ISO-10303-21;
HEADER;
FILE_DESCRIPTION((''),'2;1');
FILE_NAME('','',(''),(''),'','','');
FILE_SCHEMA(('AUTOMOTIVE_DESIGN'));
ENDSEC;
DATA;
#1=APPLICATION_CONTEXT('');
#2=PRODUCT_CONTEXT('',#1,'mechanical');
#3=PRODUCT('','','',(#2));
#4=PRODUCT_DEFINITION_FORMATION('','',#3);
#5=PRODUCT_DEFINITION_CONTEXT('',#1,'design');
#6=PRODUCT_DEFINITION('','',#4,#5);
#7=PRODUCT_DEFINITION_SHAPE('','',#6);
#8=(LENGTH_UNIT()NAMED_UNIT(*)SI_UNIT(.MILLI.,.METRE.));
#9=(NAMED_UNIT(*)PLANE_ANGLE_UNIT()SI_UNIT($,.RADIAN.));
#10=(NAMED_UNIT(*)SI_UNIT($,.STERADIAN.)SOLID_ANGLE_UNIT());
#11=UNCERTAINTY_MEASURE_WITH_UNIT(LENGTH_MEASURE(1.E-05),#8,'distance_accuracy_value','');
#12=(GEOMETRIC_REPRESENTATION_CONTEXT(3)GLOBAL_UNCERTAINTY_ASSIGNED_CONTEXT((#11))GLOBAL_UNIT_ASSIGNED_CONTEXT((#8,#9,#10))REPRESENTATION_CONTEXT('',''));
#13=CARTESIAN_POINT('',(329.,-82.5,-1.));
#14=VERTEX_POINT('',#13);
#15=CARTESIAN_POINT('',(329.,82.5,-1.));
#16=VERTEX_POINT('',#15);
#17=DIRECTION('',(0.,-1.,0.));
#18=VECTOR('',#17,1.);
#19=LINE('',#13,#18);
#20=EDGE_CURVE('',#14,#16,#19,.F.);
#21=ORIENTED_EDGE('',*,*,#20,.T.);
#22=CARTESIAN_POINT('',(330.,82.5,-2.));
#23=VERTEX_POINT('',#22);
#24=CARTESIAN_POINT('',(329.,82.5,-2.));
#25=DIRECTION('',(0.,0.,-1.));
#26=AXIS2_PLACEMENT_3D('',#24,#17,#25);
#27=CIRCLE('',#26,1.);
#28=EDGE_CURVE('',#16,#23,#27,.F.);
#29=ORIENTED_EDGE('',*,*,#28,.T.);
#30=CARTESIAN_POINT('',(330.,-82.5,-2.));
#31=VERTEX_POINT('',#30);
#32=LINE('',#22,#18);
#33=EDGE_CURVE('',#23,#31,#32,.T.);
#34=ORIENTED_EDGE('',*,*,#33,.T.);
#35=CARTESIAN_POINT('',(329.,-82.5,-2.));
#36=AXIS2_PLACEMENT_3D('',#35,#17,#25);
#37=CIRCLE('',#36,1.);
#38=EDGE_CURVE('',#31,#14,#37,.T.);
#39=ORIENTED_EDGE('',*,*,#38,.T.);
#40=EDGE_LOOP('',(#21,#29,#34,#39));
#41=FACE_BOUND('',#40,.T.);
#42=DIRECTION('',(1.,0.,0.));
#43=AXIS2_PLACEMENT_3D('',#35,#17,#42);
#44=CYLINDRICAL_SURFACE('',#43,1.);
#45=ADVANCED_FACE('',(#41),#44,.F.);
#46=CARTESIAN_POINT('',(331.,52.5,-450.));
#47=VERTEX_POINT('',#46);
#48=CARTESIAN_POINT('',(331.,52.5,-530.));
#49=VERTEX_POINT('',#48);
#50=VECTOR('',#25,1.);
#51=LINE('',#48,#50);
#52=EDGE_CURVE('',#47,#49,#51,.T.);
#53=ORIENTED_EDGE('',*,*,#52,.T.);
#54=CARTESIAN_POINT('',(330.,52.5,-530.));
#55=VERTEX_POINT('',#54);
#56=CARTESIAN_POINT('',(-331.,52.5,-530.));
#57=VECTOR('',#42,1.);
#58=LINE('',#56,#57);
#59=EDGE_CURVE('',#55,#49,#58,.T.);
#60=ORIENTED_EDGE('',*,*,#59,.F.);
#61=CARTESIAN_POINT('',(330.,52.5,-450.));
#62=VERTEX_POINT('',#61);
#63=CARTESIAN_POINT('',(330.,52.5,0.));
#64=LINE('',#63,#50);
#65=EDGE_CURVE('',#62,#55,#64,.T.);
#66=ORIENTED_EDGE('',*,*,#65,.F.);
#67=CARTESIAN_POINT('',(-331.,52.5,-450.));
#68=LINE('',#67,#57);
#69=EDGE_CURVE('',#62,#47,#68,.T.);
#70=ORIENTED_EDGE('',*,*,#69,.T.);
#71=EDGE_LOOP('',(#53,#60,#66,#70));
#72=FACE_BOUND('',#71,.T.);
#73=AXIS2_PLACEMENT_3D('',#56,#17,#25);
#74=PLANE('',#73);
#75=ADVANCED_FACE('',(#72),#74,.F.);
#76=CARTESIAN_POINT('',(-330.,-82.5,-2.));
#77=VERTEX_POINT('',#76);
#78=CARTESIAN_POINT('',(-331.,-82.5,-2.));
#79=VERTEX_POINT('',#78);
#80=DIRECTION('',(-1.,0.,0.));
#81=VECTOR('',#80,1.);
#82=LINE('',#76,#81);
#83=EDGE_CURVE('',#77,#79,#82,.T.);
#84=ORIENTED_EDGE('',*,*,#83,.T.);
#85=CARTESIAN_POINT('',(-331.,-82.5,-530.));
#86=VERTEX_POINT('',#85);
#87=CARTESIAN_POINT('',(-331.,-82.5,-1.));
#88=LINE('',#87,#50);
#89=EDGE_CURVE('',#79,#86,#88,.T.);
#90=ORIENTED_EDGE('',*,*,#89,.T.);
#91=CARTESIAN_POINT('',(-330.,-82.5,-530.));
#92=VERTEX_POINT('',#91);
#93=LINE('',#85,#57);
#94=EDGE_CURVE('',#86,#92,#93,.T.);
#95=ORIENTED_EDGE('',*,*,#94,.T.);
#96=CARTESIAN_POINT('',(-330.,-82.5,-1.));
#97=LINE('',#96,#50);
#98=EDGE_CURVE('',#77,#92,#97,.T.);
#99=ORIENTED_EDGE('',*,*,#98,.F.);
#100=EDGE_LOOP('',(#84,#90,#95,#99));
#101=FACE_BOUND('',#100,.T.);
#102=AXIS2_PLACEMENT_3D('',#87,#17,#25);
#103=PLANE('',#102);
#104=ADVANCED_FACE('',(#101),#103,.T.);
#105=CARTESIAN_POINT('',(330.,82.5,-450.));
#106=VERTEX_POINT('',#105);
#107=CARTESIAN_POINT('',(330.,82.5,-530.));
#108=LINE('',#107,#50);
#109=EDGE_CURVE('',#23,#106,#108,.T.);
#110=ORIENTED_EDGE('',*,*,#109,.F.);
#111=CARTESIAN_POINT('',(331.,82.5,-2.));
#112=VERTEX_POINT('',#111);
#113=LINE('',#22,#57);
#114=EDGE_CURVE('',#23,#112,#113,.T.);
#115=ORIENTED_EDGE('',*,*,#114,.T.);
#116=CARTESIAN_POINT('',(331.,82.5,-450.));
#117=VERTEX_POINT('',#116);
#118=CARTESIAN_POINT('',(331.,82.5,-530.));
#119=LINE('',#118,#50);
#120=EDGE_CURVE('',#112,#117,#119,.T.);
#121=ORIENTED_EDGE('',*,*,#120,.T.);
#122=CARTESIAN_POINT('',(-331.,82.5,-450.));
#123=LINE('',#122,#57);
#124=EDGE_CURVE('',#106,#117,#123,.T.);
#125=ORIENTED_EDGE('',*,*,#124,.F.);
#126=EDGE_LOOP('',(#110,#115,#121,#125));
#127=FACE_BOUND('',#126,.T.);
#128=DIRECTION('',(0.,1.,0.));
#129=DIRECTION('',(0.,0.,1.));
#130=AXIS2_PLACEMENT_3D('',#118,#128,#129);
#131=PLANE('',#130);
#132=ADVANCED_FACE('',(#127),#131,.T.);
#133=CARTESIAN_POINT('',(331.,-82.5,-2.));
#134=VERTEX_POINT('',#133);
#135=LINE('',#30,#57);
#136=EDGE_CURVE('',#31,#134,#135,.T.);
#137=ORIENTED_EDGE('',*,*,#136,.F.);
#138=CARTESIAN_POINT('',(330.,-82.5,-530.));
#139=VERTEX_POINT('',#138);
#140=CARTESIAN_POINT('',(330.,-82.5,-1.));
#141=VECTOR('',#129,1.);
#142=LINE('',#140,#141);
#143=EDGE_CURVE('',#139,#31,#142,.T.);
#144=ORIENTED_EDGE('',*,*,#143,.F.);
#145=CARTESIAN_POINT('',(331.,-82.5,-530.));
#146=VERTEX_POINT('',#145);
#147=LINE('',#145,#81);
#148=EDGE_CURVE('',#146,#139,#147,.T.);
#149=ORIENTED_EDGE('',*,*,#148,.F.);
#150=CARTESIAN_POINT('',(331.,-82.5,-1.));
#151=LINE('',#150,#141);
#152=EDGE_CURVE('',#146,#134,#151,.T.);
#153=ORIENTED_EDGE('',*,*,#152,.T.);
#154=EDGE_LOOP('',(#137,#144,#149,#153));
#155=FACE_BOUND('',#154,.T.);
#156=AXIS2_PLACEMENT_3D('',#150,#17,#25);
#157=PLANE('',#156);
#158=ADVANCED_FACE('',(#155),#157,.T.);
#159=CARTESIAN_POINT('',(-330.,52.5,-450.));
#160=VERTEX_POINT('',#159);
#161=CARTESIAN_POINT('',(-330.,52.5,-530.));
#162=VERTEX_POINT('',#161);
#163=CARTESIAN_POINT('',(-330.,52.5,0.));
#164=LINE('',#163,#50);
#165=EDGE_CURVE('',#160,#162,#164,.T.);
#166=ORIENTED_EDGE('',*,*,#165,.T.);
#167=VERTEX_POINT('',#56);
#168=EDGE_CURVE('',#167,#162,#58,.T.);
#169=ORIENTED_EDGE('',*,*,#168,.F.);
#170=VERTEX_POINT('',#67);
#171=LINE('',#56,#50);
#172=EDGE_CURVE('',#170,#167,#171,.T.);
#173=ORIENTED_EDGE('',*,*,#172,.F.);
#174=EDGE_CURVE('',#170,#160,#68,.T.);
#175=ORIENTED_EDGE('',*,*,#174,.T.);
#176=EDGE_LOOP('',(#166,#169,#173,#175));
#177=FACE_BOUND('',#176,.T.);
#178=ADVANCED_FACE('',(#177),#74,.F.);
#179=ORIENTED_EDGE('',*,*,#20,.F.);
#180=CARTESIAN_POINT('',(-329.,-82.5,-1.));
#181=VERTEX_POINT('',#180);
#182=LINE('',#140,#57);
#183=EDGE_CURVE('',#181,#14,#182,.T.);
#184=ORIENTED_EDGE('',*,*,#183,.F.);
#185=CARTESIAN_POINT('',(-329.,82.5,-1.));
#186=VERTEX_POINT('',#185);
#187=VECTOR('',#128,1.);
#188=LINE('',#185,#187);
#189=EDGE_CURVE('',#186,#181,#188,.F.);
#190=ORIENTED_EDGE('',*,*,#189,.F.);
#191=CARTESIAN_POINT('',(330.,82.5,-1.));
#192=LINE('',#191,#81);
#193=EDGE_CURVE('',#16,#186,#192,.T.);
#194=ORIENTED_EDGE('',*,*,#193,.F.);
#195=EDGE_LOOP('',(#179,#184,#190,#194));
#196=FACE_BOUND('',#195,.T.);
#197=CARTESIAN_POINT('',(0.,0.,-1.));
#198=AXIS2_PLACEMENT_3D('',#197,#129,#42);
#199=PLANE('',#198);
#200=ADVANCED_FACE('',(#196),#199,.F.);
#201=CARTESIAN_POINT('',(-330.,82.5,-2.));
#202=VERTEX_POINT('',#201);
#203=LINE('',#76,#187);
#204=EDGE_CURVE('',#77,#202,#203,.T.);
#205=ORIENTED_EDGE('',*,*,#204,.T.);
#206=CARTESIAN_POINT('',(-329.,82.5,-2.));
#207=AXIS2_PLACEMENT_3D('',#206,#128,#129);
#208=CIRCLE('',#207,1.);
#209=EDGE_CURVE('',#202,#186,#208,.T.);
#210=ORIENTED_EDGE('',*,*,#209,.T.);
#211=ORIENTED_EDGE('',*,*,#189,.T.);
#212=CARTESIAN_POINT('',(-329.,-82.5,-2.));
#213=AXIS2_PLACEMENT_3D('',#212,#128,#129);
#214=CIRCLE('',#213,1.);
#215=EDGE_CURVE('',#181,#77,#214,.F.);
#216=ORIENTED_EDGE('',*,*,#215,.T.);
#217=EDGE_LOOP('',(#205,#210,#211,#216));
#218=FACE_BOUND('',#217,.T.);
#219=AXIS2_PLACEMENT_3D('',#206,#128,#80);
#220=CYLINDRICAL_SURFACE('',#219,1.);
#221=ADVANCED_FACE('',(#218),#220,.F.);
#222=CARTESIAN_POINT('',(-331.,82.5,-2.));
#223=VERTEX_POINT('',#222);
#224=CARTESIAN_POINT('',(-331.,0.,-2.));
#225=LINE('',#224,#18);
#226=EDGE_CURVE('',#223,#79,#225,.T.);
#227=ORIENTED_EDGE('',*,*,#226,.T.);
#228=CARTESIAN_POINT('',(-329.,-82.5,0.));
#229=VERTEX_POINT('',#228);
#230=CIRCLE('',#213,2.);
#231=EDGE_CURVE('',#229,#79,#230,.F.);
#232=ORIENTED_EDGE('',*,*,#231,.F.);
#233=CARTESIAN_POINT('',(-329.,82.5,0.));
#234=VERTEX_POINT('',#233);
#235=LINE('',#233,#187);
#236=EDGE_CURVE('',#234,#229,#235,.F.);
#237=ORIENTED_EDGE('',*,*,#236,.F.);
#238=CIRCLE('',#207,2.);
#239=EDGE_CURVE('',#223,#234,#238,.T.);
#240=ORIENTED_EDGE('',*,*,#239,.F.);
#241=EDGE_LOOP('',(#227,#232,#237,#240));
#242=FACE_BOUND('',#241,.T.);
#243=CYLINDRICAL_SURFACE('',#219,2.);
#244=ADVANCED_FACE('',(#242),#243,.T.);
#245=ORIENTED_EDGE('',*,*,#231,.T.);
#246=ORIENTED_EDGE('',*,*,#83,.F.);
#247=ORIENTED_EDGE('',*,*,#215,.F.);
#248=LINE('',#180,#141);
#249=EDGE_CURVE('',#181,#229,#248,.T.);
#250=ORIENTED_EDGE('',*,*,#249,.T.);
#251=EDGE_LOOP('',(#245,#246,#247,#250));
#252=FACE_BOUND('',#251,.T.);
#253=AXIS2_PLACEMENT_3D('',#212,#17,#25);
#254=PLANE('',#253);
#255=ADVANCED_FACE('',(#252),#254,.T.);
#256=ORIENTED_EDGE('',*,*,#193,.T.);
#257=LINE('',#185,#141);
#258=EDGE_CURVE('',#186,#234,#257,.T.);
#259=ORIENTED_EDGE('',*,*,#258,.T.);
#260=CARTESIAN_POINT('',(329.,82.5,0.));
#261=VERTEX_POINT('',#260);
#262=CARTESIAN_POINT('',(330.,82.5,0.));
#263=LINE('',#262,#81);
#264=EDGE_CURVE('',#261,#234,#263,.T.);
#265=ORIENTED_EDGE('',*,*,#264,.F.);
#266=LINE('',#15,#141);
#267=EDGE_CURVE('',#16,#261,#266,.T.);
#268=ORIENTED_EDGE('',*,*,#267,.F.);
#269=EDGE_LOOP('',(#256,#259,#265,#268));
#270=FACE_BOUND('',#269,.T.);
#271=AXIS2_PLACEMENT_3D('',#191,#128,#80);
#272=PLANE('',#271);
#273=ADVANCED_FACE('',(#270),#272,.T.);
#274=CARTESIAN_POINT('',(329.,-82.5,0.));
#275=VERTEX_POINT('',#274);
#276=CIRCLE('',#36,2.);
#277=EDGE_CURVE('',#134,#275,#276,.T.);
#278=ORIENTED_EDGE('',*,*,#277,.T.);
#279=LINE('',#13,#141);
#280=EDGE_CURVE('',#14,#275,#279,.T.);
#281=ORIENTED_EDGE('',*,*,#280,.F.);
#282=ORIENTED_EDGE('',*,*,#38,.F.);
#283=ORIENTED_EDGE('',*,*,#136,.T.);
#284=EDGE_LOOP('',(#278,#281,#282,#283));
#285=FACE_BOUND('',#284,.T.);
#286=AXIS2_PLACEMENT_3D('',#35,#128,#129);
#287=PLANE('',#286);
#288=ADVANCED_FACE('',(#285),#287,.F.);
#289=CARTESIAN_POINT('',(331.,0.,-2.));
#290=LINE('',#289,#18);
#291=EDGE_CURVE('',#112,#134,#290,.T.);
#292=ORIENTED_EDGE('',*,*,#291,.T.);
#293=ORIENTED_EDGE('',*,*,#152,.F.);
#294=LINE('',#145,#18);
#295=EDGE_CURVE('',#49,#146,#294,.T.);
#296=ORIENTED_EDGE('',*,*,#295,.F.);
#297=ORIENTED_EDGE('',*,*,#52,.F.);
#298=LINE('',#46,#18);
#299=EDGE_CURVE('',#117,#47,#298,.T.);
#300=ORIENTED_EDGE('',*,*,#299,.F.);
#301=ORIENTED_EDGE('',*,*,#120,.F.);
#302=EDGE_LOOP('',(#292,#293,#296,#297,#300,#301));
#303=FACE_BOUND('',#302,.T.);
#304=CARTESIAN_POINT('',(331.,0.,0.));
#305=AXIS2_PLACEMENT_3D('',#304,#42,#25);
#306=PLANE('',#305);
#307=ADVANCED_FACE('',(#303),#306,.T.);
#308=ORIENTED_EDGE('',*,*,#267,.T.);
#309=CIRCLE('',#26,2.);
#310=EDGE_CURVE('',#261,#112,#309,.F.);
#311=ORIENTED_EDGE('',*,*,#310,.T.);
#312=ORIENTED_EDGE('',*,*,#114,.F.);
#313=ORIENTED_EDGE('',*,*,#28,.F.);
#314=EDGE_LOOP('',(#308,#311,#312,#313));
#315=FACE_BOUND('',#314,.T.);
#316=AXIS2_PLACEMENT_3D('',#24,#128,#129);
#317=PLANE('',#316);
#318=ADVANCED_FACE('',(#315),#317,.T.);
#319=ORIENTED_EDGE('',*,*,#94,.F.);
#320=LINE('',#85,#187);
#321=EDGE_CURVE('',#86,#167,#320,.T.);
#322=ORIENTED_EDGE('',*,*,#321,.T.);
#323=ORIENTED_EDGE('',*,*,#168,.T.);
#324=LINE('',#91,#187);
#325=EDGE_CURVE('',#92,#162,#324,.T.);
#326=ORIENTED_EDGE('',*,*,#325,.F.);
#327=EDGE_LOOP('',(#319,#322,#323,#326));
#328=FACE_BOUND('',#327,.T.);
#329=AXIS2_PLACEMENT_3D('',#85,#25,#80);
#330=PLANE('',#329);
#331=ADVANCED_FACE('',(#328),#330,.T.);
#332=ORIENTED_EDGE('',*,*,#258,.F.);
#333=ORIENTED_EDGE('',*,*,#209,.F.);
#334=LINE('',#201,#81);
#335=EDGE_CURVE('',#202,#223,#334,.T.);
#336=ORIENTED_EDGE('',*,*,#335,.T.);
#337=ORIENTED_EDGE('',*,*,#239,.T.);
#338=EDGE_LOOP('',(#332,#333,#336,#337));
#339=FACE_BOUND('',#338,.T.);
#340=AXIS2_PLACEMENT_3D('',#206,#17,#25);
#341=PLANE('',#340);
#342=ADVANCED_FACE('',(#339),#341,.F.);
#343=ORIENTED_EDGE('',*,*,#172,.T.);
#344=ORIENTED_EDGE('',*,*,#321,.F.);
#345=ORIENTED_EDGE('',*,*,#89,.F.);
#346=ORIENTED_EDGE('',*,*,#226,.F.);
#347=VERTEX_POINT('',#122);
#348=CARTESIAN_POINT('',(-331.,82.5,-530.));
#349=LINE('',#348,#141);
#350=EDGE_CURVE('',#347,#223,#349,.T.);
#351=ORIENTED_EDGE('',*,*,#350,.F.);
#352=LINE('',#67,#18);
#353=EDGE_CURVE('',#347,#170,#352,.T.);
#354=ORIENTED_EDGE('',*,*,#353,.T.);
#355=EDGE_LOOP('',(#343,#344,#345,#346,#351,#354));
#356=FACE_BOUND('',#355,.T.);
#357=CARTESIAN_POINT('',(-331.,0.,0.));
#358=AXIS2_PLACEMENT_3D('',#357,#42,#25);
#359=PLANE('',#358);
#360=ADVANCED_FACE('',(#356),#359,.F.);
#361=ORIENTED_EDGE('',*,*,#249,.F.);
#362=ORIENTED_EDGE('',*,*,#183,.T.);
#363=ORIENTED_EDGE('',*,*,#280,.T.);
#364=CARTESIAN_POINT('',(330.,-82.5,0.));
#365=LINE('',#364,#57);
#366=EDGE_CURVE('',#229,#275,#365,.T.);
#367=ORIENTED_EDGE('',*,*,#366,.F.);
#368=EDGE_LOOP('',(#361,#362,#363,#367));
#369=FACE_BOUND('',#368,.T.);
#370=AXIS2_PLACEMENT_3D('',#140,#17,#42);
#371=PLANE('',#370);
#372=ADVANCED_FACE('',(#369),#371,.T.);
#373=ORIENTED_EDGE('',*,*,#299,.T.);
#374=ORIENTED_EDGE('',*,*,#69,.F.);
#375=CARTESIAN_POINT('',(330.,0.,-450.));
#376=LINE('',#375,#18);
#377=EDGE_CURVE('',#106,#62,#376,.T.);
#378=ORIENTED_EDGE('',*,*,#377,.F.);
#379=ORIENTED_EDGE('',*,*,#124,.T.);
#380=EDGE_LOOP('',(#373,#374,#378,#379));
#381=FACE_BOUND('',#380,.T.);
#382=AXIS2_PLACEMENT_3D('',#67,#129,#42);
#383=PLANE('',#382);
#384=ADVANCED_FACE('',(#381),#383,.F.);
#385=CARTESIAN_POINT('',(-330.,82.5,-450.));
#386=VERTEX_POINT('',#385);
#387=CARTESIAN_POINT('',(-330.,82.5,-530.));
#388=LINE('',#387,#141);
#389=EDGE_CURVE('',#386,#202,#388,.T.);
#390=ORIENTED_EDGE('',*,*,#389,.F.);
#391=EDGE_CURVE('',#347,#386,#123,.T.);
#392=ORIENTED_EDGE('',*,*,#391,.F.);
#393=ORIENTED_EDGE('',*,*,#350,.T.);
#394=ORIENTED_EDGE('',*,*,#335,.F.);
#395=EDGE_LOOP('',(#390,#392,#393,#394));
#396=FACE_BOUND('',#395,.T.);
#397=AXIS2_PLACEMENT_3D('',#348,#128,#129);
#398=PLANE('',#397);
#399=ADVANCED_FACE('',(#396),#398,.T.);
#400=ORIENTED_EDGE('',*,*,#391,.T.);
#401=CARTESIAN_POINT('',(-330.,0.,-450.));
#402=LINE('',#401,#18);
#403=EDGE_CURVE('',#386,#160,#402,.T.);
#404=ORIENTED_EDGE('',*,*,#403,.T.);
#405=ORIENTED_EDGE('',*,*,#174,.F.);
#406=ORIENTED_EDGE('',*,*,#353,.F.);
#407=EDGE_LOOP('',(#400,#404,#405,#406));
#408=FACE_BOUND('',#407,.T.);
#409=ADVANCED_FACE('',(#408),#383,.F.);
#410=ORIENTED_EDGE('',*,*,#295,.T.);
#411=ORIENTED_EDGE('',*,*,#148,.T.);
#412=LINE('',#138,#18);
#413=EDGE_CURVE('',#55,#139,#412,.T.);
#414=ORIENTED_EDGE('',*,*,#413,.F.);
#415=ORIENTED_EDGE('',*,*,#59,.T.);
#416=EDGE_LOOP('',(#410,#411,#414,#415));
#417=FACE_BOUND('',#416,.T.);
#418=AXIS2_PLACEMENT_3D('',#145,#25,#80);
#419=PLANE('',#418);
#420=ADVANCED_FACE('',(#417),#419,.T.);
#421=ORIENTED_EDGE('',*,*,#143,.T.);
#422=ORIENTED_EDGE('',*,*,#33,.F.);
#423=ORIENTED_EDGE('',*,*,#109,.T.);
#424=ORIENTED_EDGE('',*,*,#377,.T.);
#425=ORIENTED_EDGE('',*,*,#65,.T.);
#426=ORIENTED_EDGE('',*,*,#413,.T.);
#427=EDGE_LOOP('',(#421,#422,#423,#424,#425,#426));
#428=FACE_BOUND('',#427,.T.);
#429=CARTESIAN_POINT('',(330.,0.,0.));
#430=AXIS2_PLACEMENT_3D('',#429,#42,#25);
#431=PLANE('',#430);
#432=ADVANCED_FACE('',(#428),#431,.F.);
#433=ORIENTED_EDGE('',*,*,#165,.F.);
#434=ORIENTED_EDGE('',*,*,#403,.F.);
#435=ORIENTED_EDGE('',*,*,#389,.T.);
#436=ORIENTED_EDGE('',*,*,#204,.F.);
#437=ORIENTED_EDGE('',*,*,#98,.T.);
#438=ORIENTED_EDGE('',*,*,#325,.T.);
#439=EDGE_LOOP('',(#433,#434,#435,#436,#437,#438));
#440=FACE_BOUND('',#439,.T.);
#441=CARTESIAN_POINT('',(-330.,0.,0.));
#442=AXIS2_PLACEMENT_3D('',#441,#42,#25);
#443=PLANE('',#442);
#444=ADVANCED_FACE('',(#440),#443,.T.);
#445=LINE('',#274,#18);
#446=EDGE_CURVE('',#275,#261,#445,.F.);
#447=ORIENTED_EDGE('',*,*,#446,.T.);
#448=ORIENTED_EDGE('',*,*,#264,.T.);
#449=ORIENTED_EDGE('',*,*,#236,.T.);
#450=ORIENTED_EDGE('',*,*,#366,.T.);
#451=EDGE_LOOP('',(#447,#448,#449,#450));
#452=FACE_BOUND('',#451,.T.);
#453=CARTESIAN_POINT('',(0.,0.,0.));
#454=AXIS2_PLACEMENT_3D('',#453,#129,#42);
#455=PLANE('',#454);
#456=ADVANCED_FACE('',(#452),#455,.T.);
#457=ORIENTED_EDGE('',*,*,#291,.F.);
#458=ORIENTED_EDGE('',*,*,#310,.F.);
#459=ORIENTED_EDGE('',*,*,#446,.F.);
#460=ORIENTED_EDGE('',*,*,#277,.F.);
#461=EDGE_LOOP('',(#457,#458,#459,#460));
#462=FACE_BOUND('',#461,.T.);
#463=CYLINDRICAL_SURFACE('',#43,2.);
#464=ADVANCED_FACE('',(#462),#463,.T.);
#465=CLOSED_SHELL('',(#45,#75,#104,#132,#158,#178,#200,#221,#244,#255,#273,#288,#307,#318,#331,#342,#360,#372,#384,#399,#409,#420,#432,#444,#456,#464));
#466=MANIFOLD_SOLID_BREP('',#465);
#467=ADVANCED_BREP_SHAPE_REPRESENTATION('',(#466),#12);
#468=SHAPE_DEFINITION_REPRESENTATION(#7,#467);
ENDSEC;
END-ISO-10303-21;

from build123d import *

# Parameters (mm, degrees)
SKETCH1_W                      = 660
SKETCH1_H                      = 165
BASE_FLANGE1_DEPTH             = 1
EDGE_FLANGE1_STRIP_W           = 6
EDGE_FLANGE1_STRIP_H           = 1
EDGE_FLANGE1_STRIP_CUT_DEPTH   = 165
EDGE_FLANGE1_STRIP_2_W         = 6
EDGE_FLANGE1_STRIP_2_H         = 1
EDGE_FLANGE1_STRIP_CUT_2_DEPTH = 165
EDGE_FLANGE1_DEPTH             = 165
EDGE_FLANGE1_BEND_DEPTH        = 165
SKETCH12_W                     = 80
SKETCH12_H                     = 30
CUT_EXTRUDE1_DEPTH             = 853.027141586


# Sheet-metal steps are written as plain solids
with BuildPart() as part:
    # Sketch1 → Base-Flange1 (new body)
    with BuildSketch(Plane.XY):
        Rectangle(SKETCH1_W, SKETCH1_H)
    extrude(amount=-BASE_FLANGE1_DEPTH)

    # Edge-Flange1 strip (across the edge) → Edge-Flange1 strip cut (cut)
    with BuildSketch(Plane(origin=(330, 82.5, -1), x_dir=(-1, 0, 0), z_dir=(0, -1, 0))):
        with Locations((-2, -0.5)):
            Rectangle(EDGE_FLANGE1_STRIP_W, EDGE_FLANGE1_STRIP_H)
    extrude(amount=EDGE_FLANGE1_STRIP_CUT_DEPTH, mode=Mode.SUBTRACT)

    # Edge-Flange1 strip 2 (across the edge) → Edge-Flange1 strip cut 2 (cut)
    with BuildSketch(Plane(origin=(-330, -82.5, -1), x_dir=(1, 0, 0), z_dir=(0, 1, 0))):
        with Locations((-2, -0.5)):
            Rectangle(EDGE_FLANGE1_STRIP_2_W, EDGE_FLANGE1_STRIP_2_H)
    extrude(amount=EDGE_FLANGE1_STRIP_CUT_2_DEPTH, mode=Mode.SUBTRACT)

    # Edge-Flange1 section (across the edge) → Edge-Flange1 (add)
    with BuildSketch(Plane(origin=(330, 82.5, -1), x_dir=(-1, 0, 0), z_dir=(0, -1, 0))):
        with BuildLine():
            Line((-1, 1), (-1, 529))
            Line((-1, 529), (0, 529))
            Line((0, 529), (0, 1))
            ThreePointArc((0, 1), (0.292893219, 0.292893219), (1, 0))
            Line((1, 0), (1, -1))
            ThreePointArc((1, -1), (-0.414213562, -0.414213562), (-1, 1))
        make_face()
    extrude(amount=EDGE_FLANGE1_DEPTH)

    # Edge-Flange1 section 2 (across the edge) → Edge-Flange1 bend (add)
    with BuildSketch(Plane(origin=(-330, -82.5, -1), x_dir=(1, 0, 0), z_dir=(0, 1, 0))):
        with BuildLine():
            Line((-1, 1), (-1, 529))
            Line((-1, 529), (0, 529))
            Line((0, 529), (0, 1))
            ThreePointArc((0, 1), (0.292893219, 0.292893219), (1, 0))
            Line((1, 0), (1, -1))
            ThreePointArc((1, -1), (-0.414213562, -0.414213562), (-1, 1))
        make_face()
    extrude(amount=EDGE_FLANGE1_BEND_DEPTH)

    # Sketch12 → Cut-Extrude1 (cut, through all)
    with BuildSketch(Plane(origin=(331, 0, 0), x_dir=(0, 0, -1), z_dir=(1, 0, 0))):
        with Locations((490, 67.5)):
            Rectangle(SKETCH12_W, SKETCH12_H)
    extrude(amount=-CUT_EXTRUDE1_DEPTH, mode=Mode.SUBTRACT)


solid = part.part
